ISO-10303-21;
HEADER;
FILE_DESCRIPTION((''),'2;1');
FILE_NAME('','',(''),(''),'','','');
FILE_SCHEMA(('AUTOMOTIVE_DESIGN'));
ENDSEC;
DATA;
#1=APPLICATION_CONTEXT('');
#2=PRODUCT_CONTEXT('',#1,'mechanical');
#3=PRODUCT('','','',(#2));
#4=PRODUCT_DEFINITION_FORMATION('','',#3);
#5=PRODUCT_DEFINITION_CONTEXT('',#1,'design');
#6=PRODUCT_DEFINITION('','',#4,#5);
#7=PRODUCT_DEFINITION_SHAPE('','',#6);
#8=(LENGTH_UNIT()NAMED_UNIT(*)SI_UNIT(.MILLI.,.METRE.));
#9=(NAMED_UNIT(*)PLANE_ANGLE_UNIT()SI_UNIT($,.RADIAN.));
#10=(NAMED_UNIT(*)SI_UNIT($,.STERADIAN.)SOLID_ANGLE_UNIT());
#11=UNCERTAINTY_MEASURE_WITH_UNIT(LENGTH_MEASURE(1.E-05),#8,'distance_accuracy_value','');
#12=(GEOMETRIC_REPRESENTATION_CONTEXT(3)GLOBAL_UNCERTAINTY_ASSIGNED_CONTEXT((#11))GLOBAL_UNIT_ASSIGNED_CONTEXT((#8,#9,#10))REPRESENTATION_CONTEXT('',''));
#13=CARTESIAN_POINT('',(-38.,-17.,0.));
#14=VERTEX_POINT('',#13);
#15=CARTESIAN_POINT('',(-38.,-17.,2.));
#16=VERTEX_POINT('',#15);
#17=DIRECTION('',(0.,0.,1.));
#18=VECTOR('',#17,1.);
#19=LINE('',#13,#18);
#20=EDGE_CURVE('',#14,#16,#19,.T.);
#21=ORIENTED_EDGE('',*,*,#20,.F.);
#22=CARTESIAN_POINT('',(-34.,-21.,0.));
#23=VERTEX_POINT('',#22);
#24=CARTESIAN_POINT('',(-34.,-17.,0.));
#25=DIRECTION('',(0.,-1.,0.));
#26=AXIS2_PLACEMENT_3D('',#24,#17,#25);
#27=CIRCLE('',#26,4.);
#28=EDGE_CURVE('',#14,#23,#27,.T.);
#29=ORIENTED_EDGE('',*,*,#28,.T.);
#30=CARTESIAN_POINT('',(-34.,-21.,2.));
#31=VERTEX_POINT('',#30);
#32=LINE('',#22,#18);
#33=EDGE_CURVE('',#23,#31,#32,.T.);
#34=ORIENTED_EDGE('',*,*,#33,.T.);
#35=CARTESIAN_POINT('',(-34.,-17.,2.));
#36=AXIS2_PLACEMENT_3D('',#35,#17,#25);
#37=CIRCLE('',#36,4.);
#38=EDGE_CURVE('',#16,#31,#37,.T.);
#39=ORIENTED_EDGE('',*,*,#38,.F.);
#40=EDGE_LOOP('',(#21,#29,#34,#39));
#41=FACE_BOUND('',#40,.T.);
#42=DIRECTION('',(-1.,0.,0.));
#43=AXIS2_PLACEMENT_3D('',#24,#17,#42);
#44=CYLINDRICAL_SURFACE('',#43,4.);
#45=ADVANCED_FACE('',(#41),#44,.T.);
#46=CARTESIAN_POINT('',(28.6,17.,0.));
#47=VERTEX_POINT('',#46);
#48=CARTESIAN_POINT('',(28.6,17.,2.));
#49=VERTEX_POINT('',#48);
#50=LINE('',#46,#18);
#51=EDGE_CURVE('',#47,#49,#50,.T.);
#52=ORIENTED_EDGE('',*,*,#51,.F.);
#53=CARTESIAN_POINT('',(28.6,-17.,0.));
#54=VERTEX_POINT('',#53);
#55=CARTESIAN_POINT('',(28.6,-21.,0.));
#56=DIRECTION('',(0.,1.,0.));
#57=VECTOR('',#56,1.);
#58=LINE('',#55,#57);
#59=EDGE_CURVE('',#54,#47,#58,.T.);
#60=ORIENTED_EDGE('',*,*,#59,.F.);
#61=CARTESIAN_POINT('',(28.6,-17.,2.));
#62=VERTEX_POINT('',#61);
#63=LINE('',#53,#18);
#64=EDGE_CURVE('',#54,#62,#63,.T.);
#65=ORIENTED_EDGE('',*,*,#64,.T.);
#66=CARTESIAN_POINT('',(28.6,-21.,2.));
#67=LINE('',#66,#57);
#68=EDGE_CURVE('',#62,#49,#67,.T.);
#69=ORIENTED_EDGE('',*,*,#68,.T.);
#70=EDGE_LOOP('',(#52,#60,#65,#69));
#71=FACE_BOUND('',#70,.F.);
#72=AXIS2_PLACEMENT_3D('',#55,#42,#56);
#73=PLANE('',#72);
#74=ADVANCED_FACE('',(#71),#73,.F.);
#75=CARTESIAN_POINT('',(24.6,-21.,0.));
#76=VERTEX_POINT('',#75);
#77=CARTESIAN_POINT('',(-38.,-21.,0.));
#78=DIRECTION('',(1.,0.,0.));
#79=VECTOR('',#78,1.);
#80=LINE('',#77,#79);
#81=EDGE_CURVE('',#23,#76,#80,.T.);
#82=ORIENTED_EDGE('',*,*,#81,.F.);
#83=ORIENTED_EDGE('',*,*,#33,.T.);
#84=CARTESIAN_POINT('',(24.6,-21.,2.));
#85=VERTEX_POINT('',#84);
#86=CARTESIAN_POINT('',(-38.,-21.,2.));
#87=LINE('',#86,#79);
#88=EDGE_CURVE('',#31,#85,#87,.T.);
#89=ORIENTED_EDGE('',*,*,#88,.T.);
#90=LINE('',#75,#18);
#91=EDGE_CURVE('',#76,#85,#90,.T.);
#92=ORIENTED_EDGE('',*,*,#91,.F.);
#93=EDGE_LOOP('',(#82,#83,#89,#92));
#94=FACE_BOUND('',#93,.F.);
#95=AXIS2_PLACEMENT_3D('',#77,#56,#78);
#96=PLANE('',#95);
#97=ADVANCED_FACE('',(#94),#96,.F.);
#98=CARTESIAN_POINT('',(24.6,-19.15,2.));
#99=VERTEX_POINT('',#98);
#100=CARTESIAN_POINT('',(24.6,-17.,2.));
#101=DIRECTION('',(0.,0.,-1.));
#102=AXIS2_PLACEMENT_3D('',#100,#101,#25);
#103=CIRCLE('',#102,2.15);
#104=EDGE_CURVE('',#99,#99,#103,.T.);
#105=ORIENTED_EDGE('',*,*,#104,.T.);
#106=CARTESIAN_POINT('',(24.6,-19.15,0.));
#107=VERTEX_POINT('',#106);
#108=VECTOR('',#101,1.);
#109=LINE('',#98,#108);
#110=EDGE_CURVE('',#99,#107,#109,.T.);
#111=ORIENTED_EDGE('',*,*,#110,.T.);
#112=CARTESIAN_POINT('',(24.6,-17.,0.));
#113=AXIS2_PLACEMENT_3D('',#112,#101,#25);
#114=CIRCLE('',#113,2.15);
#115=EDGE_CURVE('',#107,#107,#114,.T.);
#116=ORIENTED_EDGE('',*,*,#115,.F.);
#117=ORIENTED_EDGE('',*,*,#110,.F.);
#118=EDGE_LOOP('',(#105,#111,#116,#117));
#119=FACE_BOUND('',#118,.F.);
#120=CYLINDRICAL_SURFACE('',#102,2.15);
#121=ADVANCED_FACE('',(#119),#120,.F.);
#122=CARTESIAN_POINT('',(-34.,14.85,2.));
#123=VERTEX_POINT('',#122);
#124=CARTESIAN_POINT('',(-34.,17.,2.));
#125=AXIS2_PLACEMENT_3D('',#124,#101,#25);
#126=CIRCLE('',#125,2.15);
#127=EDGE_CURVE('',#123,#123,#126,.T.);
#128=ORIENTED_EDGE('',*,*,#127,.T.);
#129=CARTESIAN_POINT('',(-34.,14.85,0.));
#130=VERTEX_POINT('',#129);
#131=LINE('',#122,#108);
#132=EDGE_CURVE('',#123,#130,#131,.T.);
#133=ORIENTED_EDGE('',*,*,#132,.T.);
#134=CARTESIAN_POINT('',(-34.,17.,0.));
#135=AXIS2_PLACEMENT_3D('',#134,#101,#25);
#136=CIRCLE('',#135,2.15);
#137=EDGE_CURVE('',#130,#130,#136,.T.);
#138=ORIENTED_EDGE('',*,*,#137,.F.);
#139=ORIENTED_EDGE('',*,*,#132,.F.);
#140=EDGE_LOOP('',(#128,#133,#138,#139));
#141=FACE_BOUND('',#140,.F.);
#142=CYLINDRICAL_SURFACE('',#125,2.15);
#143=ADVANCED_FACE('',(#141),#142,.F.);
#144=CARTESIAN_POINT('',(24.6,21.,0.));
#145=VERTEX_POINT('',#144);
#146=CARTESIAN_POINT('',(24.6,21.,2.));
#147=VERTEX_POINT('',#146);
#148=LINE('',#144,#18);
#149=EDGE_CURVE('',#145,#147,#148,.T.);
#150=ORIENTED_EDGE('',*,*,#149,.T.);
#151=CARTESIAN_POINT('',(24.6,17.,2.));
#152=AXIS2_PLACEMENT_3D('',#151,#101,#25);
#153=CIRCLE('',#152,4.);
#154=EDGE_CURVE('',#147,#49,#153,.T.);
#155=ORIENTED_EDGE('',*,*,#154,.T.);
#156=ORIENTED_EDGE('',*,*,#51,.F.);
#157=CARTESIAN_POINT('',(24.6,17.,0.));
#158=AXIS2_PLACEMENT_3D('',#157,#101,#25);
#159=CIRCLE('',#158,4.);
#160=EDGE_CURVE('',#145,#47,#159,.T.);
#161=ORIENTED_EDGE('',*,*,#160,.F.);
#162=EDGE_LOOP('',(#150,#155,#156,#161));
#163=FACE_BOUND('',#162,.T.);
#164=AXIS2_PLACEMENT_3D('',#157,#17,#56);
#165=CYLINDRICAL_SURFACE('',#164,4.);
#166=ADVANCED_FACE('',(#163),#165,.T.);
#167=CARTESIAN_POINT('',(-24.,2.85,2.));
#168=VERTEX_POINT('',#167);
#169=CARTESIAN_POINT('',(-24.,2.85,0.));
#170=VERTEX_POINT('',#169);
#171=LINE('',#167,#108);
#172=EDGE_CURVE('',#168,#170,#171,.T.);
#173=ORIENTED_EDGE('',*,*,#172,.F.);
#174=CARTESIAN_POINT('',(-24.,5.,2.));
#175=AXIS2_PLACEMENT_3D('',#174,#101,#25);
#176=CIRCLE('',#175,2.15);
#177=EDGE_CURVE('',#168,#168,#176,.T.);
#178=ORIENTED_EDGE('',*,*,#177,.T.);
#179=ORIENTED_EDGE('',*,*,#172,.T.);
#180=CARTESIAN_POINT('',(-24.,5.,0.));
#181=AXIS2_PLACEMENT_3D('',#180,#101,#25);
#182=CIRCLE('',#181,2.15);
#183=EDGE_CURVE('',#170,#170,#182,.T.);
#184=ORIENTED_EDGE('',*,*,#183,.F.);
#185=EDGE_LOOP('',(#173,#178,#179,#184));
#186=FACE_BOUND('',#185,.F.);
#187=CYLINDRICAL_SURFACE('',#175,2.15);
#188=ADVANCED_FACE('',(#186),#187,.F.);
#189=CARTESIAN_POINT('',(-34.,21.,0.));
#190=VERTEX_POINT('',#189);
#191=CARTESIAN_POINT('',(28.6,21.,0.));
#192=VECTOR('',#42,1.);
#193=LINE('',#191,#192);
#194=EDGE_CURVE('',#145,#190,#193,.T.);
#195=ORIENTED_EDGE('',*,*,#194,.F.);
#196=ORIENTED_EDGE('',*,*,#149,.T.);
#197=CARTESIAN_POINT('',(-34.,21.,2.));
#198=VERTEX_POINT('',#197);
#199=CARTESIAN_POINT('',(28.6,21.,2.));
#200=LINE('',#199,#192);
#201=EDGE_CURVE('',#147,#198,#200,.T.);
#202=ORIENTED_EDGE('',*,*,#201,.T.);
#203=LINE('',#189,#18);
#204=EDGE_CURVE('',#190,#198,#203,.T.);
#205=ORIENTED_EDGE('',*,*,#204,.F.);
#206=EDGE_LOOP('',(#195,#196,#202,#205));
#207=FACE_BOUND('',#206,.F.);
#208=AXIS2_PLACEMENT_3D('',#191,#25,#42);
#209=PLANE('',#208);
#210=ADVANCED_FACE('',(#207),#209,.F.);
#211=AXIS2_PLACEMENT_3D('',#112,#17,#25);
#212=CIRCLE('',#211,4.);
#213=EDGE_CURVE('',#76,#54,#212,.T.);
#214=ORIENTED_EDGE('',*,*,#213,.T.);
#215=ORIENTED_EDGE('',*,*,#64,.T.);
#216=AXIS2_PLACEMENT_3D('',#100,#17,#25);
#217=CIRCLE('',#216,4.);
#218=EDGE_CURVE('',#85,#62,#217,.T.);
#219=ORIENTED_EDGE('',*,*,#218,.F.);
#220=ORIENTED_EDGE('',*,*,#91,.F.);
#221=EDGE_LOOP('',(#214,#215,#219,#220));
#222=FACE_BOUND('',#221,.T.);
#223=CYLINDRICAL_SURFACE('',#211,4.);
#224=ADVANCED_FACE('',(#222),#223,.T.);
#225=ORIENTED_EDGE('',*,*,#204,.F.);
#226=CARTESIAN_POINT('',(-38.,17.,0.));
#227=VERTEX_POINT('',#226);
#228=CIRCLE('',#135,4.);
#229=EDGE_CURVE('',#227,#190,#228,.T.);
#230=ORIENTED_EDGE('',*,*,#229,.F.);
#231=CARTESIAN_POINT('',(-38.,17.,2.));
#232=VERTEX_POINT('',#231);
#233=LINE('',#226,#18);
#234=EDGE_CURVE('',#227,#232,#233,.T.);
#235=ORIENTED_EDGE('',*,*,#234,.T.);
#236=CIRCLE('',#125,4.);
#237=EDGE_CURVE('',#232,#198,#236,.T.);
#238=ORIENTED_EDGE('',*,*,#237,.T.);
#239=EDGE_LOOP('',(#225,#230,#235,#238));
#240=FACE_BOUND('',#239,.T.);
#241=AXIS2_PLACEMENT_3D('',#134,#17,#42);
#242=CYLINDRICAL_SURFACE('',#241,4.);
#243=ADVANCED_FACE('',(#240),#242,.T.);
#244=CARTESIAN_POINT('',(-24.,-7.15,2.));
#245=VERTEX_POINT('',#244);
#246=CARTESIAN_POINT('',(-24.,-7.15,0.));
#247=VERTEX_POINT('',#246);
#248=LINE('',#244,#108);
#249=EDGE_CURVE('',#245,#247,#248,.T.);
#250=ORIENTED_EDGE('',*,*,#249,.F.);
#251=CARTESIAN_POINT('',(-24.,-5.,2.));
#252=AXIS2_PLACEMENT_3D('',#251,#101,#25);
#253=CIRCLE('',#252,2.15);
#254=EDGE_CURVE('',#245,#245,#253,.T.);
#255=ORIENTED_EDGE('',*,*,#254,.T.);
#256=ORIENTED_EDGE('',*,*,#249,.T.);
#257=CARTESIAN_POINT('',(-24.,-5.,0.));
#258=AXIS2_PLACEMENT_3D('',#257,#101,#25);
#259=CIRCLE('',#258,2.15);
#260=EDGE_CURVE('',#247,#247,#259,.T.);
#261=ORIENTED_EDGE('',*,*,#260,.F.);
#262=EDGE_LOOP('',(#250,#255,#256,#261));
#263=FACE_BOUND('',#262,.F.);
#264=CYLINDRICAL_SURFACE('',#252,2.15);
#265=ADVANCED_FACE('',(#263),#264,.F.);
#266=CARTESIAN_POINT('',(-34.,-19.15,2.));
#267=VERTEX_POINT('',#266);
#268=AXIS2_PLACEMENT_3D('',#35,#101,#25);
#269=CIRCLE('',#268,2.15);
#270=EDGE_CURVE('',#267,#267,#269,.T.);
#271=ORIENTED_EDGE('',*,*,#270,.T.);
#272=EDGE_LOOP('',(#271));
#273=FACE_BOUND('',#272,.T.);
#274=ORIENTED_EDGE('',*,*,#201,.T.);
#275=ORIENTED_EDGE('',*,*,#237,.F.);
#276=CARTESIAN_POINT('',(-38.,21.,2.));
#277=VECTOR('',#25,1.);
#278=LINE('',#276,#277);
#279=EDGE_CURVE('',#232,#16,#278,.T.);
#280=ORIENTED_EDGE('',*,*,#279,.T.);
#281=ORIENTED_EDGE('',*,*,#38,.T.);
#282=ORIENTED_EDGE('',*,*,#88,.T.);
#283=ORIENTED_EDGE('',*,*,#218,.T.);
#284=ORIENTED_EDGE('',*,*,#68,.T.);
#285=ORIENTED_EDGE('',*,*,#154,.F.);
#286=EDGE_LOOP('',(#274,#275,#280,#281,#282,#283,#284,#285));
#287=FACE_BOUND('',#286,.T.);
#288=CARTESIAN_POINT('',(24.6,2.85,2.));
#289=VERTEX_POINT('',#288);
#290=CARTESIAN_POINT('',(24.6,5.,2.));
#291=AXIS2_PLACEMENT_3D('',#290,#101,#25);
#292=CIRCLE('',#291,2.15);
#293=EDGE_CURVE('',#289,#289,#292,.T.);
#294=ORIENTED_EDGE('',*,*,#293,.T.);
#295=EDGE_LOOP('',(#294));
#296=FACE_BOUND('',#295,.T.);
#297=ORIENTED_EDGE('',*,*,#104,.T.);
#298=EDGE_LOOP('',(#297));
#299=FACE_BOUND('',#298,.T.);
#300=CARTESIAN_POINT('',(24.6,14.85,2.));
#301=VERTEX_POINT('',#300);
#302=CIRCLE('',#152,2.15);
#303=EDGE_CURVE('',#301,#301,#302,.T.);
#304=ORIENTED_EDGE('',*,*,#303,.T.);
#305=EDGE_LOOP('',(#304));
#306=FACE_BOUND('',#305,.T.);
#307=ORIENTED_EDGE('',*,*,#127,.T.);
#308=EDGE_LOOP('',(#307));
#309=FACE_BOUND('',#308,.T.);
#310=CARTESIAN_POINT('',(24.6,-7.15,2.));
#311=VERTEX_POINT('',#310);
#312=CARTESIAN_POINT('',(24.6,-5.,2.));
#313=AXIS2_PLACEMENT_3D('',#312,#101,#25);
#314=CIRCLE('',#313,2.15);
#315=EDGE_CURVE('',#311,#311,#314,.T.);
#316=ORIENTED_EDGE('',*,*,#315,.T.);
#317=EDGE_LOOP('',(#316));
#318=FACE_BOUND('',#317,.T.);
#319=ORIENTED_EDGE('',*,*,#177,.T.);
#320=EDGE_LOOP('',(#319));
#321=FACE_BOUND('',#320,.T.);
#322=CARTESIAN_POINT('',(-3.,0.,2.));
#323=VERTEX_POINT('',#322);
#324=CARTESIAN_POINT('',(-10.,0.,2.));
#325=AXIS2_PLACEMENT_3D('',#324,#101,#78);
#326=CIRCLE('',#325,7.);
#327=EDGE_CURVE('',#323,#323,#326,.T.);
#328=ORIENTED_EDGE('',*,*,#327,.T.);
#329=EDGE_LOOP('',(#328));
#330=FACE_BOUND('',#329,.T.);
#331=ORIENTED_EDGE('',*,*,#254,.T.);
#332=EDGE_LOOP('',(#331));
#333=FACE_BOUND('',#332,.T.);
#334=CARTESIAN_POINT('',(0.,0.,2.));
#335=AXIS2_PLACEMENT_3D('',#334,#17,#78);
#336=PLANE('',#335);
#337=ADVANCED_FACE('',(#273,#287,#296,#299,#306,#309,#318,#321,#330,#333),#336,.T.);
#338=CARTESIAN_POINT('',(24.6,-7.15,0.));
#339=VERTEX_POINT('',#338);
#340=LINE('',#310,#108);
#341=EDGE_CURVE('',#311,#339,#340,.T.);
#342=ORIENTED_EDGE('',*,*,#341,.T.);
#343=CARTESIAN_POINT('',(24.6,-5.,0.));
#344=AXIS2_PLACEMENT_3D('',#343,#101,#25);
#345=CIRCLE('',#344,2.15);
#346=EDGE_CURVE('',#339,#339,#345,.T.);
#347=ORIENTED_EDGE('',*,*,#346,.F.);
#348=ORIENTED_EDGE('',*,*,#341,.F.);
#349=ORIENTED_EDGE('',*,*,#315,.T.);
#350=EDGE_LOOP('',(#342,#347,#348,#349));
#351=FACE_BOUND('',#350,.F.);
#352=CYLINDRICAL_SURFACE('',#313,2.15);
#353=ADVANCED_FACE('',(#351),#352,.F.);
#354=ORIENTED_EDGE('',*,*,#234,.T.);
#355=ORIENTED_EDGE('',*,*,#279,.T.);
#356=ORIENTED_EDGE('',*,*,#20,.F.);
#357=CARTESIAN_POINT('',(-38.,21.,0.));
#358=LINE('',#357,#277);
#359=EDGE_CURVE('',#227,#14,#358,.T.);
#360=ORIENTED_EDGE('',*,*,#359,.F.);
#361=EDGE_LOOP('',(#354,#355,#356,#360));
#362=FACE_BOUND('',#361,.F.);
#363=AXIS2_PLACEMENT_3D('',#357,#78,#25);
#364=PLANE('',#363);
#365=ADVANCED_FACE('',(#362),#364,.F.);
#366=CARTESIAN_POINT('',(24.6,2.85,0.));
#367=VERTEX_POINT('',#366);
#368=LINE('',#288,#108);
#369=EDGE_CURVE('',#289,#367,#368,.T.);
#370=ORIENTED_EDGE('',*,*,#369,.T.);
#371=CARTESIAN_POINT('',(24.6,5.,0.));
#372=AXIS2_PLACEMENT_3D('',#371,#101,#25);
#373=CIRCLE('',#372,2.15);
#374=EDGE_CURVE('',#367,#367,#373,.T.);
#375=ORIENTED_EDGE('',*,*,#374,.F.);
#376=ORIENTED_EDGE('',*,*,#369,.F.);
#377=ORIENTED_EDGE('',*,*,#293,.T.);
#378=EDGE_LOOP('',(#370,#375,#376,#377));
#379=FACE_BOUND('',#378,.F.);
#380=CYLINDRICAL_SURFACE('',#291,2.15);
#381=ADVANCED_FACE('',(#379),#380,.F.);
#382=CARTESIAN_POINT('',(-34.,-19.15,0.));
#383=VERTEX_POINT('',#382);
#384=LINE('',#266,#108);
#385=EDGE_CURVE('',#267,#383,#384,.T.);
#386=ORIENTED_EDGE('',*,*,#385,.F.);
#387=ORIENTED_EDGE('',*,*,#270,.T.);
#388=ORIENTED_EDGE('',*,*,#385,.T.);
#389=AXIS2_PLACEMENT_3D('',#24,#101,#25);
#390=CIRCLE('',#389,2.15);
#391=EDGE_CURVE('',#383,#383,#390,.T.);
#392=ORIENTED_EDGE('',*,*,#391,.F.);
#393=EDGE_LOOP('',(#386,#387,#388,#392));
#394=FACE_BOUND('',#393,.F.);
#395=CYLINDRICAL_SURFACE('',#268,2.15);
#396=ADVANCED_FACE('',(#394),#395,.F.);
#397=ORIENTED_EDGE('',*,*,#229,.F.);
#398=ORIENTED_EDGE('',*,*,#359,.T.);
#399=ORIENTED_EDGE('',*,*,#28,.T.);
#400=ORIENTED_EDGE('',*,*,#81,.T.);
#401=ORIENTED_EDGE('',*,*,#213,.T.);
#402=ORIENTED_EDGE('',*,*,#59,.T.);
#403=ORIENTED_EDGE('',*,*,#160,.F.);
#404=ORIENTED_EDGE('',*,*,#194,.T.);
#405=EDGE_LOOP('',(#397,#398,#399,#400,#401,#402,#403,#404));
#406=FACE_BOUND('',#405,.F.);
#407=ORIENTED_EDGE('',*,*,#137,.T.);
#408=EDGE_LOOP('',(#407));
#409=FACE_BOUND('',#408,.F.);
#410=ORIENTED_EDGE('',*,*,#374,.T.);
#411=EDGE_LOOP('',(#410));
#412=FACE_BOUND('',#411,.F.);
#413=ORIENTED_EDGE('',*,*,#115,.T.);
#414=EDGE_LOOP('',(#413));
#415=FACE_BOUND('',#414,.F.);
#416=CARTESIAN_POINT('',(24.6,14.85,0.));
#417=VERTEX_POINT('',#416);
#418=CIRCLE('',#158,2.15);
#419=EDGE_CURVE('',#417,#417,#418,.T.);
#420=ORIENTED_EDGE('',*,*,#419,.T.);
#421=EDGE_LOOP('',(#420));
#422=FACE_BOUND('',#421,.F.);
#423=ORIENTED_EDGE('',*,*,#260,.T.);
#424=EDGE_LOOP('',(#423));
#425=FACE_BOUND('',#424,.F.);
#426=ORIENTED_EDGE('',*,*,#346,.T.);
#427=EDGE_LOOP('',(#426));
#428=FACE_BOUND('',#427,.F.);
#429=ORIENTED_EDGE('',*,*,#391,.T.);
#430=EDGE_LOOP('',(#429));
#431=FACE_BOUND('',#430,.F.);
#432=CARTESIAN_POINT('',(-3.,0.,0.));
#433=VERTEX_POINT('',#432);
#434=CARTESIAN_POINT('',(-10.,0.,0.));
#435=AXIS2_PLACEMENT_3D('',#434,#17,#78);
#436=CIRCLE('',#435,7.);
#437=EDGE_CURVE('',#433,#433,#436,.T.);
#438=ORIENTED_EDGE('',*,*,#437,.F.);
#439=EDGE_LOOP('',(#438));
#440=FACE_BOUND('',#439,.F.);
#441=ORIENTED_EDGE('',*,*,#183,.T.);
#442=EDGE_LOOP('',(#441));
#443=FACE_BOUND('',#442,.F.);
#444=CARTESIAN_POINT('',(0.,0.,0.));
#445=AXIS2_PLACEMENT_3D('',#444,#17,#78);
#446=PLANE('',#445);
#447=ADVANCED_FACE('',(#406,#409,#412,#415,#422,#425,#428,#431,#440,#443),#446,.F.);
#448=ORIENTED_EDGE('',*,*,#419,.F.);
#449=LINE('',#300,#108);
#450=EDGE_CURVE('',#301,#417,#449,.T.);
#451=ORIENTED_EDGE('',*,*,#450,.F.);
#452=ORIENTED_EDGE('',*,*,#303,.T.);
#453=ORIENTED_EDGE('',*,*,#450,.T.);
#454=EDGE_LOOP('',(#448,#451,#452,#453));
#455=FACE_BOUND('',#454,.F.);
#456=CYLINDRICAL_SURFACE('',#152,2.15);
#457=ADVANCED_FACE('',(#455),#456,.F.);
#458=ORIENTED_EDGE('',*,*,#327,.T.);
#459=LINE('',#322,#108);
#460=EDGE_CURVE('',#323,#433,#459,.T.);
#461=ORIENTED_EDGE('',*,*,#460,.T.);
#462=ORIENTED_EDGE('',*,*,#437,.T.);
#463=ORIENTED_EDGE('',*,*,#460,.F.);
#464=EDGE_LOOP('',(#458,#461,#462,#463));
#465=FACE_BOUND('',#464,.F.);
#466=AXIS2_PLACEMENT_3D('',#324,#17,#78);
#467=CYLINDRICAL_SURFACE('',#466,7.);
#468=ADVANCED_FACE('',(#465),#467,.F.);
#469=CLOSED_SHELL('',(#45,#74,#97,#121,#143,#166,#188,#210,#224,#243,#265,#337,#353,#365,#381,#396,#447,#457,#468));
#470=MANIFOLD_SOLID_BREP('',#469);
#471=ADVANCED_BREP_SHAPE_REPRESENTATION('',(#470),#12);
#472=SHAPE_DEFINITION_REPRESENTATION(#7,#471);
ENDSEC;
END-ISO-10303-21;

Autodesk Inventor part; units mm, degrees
ref_plane "YZ Plane" through (0, 0, 0) normal (1, 0, 0) x (0, 1, 0)
ref_plane "XZ Plane" through (0, 0, 0) normal (0, 1, 0) x (-1, 0, 0)
ref_plane "XY Plane" through (0, 0, 0) normal (0, 0, 1) x (1, 0, 0)
sketch "スケッチ1" plane through (0, 0, 0) normal (0, 0, 1) x (1, 0, 0)
  line L0 (-38, -21) -> (28.6, -21)
  line L1 (28.6, -21) -> (28.6, 21)
  line L2 (28.6, 21) -> (-38, 21)
  line L3 (-38, 21) -> (-38, -21)
  point P0 (0, 0)
  dimension "d1" = 42
  dimension "d28" = 38
  dimension "d29" = 28.6
  dimension "d32" = 21
extrude "プレート1" add sketch "スケッチ1" along normal blind 2
sketch "スケッチ2" plane through (0, 0, 2) normal (0, 0, 1) x (1, 0, 0)
  line L0 (-24, -5) -> (24.6, -5)
  line L1 (24.6, -5) -> (24.6, 5)
  line L2 (24.6, 5) -> (-24, 5)
  line L3 (-24, 5) -> (-24, -5)
  line L4 (-24, -5) -> (24.6, 5) construction
  line L5 (24.6, -5) -> (-24, 5) construction
  line L6 (28.6, -21) -> (-38, -21) projected
  line L7 (-38, -21) -> (-38, 21) projected
  line L8 (28.6, -21) -> (-38, -21) projected
  line L9 (28.6, 21) -> (28.6, -21) projected
  line L10 (-38, 21) -> (28.6, 21) projected
  circle A0 centre (-10, 0) radius 7
  point P0 (0.3, 0)
  point P1 (0.3, 0)
  point P2 (0.3, 0)
  point P3 (0, 0)
  dimension "d3" = 48.6
  dimension "d5" = 10
  dimension "d16" = 14
  dimension "d31" = 14
  dimension "d33" = 4
  dimension "d34" = 0
hole "穴1" at (24.6, 5, 2) at (24.6, -5, 2) at (-24, 5, 2) at (-24, -5, 2) direction (0, 0, -1) diameter 4.3 end through all clearance for "Socket Head Cap Screw" size "M4" standard "Ansi Metric M Profile"
extrude "押し出し1" cut sketch "スケッチ2" against normal blind 10 contours A0 L2 L0 | L0 A0 | A0 L2
sketch "スケッチ3" plane through (0, 0, 2) normal (0, 0, 1) x (1, 0, 0)
  line L0 (-38, 21) -> (28.6, 21) projected
  line L1 (-38, -21) -> (-38, 21) projected
  line L2 (28.6, -21) -> (-38, -21) projected
  line L3 (28.6, 21) -> (28.6, -21) projected
  line L4 (24.6, 17) -> (-34, 17)
  line L5 (-34, 17) -> (-34, -17)
  line L6 (-34, -17) -> (24.6, -17)
  line L7 (24.6, -17) -> (24.6, 17)
  point P0 (0, 0)
  dimension "d19" = 4
hole "穴2" at (-34, 17, 2) at (-34, -17, 2) at (24.6, 17, 2) at (24.6, -17, 2) direction (0, 0, -1) diameter 4.3 end through all clearance for "Socket Head Cap Screw" size "M4" standard "Ansi Metric M Profile"
fillet "コーナーR1" radius 4 4 edges at (28.6, 21, 1) (-38, 21, 1) (-38, -21, 1) (28.6, -21, 1)
equation "\"d14\" = Thickness"
equation "\"d2\" = Thickness"
equation "\"d32\" = 0.5 * d1"
equation "\"BendRadius\" = Thickness"
equation "\"BendReliefWidth\" = Thickness"
equation "\"BendReliefDepth\" = 0.5 * Thickness"
equation "\"CornerReliefSize\" = 4 * Thickness"
equation "\"MinimumRemnant\" = 2 * Thickness"
equation "\"TransitionRadius\" = BendRadius"
equation "\"JacobiRadiusSize\" = BendRadius"
equation "\"GapSize\" = Thickness"
equation "\"Thickness\" = 2"
properties part number "s_carbon_plate8" material "CFRP"
